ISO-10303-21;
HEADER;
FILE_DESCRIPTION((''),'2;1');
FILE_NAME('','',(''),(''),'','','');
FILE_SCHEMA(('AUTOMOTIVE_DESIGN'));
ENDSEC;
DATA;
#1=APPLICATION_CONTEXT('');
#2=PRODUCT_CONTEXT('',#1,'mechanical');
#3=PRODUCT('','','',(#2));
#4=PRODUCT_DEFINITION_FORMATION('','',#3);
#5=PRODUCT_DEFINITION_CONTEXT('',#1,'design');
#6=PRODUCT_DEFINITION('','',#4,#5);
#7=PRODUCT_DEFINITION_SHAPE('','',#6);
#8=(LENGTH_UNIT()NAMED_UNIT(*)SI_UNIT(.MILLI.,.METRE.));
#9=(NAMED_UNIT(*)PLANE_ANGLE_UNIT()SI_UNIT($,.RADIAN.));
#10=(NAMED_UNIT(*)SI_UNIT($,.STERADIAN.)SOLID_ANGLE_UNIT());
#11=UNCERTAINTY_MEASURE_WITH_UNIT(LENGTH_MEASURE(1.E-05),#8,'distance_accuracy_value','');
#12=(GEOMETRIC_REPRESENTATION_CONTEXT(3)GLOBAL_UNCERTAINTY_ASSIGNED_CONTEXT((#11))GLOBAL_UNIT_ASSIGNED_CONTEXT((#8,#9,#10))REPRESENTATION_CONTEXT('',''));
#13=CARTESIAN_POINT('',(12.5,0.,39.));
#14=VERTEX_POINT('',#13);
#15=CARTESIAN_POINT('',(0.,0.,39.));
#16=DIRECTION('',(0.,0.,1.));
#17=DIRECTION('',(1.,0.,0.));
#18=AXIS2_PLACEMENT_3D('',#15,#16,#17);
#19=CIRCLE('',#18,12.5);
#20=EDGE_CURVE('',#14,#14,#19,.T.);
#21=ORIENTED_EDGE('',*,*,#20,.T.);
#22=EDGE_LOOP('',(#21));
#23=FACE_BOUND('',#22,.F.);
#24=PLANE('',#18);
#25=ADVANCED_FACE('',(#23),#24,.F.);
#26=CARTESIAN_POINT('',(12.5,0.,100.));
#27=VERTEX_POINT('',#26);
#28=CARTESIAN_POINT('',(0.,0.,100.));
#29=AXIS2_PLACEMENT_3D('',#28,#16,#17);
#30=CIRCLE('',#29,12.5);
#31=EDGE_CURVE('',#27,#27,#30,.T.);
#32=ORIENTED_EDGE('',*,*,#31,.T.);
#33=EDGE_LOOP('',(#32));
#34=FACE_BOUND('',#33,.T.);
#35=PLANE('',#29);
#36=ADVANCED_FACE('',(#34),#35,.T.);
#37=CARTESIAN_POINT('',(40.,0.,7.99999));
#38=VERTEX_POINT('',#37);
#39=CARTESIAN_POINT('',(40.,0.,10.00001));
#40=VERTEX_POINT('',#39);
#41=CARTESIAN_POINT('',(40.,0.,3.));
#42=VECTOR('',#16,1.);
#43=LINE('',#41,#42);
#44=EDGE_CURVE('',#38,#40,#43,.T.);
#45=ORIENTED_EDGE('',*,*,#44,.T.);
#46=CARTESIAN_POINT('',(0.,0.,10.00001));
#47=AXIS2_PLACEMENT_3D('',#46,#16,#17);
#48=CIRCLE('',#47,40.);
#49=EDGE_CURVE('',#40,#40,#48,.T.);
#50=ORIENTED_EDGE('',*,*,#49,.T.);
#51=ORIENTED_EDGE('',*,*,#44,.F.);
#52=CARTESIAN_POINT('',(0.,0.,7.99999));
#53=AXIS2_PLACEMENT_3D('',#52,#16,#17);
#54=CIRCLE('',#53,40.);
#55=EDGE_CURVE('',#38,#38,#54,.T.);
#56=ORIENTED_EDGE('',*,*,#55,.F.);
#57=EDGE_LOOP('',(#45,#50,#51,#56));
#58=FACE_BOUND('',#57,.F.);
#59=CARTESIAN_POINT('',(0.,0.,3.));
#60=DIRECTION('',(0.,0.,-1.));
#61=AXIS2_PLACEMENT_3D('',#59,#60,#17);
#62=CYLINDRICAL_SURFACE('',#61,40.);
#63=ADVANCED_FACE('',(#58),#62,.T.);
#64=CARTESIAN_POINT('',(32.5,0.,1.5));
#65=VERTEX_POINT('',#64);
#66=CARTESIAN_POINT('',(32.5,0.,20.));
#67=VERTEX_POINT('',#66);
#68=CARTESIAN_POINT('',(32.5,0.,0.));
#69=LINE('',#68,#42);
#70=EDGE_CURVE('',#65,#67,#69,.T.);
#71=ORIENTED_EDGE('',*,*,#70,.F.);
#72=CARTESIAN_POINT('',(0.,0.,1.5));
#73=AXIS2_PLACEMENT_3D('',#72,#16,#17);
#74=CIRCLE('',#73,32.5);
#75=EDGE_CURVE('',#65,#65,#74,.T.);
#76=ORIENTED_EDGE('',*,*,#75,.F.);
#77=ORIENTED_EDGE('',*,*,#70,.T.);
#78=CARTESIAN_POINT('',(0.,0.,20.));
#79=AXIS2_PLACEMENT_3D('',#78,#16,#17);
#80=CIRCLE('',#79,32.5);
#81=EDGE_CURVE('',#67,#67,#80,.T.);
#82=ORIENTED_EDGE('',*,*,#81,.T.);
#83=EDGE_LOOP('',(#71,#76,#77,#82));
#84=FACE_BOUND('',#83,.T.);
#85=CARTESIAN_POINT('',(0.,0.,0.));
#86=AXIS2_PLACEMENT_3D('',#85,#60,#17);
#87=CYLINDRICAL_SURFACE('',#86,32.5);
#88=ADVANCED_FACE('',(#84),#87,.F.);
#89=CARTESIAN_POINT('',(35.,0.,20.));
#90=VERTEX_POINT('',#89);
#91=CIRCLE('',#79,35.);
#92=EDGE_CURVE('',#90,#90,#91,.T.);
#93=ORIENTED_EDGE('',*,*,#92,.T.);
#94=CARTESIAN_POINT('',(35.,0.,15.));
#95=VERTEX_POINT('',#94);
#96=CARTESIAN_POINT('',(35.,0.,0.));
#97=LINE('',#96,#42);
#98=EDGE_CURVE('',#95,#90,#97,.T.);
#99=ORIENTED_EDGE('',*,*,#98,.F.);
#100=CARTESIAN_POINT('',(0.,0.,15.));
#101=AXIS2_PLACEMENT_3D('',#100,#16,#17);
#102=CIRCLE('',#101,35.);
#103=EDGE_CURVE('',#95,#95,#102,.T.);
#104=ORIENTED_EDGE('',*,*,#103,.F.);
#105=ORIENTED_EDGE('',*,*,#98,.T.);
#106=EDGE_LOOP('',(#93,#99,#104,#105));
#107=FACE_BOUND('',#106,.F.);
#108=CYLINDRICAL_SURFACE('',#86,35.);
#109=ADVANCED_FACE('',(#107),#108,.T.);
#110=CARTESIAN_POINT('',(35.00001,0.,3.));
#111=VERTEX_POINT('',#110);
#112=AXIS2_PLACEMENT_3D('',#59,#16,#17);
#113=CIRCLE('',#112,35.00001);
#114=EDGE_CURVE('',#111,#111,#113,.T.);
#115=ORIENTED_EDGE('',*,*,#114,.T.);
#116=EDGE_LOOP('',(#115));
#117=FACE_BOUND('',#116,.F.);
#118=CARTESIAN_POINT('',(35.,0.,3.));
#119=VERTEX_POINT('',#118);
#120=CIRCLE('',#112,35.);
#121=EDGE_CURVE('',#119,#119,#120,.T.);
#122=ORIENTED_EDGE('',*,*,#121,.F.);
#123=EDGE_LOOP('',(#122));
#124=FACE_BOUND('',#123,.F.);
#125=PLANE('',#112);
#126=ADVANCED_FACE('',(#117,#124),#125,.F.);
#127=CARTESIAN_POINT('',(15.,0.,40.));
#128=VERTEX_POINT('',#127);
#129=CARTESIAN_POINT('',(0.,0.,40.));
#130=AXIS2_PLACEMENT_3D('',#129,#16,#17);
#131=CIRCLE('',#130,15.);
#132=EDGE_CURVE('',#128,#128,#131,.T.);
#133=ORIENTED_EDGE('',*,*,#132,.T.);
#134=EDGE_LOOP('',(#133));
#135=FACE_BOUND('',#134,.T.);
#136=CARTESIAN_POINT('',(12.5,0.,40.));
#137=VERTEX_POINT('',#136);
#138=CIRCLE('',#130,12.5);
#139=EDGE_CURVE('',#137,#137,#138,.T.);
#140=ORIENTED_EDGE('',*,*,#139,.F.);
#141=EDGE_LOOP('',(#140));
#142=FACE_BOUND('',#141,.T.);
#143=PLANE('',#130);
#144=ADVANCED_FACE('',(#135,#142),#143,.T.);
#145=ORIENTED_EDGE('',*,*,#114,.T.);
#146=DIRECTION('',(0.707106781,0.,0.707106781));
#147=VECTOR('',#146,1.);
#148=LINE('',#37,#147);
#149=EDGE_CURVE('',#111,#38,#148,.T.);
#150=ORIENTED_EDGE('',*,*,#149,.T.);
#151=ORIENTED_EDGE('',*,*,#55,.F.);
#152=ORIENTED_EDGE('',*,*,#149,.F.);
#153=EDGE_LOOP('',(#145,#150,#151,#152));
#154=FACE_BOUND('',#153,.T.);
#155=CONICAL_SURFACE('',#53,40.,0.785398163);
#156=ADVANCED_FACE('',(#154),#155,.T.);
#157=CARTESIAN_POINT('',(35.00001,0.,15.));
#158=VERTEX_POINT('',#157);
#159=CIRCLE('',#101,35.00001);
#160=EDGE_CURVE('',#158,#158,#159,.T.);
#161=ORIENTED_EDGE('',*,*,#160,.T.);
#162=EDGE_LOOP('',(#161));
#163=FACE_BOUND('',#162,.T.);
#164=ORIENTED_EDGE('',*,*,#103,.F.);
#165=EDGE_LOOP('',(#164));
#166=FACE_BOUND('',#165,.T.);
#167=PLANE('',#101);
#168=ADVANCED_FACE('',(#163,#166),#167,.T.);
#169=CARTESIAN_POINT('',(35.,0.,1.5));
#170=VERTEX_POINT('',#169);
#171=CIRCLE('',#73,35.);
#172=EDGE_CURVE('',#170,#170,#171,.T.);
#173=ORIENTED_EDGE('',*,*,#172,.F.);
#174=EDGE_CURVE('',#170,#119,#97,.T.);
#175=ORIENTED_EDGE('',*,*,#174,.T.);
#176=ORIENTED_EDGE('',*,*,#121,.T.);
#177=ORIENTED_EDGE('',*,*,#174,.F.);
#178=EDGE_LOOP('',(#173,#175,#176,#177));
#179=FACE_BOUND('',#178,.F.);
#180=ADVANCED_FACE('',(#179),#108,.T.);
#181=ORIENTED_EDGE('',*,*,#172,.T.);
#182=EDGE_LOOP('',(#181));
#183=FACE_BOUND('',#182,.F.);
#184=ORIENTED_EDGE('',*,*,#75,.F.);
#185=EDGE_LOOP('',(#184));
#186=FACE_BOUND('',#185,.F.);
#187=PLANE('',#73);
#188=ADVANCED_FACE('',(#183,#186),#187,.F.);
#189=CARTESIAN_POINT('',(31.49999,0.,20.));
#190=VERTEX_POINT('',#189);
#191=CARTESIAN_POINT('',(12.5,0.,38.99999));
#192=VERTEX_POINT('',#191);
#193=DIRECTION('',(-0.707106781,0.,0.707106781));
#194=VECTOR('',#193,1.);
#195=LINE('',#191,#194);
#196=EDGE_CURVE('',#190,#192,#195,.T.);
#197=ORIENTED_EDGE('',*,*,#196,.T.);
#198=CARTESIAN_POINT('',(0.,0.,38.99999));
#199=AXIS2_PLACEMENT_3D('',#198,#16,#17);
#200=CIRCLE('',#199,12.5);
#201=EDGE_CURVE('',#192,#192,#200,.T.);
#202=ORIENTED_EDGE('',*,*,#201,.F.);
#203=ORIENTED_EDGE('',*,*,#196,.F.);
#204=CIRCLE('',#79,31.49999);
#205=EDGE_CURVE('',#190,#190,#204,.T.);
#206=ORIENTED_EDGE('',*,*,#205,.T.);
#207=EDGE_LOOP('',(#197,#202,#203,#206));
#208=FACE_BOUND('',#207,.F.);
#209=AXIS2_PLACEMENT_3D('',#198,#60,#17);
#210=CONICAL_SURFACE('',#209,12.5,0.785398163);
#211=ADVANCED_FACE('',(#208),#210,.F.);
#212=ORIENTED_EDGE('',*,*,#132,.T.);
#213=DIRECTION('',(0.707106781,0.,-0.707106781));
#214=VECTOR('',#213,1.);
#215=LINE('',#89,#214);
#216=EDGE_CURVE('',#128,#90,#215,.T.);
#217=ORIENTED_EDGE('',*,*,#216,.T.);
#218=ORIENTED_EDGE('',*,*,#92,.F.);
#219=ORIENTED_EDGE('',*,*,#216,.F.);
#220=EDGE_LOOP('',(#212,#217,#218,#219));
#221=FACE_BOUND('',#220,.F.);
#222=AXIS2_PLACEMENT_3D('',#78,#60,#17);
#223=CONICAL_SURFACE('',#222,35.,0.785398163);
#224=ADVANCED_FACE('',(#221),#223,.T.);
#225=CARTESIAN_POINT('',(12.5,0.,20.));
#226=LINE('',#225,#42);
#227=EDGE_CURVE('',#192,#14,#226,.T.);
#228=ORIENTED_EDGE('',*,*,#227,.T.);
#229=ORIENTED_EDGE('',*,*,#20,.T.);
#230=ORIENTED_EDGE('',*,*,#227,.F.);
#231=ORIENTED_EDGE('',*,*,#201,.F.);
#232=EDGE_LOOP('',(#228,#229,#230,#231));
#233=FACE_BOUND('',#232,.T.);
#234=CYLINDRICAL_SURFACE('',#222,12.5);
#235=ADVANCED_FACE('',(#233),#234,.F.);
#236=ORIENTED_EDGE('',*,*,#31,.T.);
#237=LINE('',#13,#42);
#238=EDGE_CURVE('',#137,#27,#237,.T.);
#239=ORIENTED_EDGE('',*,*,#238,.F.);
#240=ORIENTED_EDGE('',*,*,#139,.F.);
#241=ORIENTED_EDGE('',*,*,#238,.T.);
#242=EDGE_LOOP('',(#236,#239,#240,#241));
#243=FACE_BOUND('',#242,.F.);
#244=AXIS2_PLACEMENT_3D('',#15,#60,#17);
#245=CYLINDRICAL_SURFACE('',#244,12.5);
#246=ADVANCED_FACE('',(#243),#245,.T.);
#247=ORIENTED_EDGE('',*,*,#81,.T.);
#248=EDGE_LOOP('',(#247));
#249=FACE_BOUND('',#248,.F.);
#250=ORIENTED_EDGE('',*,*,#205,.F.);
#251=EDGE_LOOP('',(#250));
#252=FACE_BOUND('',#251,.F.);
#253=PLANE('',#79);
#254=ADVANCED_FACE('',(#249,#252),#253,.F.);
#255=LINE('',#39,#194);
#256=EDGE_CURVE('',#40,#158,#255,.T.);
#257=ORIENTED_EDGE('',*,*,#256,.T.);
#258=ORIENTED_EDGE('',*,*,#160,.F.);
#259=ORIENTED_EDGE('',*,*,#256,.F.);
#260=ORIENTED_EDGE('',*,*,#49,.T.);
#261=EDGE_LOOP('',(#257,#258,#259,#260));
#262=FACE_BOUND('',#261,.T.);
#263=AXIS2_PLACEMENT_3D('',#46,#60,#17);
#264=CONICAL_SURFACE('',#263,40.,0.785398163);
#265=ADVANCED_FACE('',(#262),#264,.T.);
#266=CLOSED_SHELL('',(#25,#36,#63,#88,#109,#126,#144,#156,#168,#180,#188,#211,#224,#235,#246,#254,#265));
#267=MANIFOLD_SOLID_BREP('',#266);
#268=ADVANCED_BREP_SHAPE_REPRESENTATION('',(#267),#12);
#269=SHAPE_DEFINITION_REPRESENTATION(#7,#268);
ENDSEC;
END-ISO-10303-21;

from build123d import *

# Parameters (mm, degrees)
F0_R     = 35
F0_R_2   = 32.5
F1_DEPTH = 40
F2_START = 20
F0_R_3   = 12.5
F2_DEPTH = 20
F3_START = 39
F3_DEPTH = 61
F4_SIZE  = 20
F5_SIZE  = 18.99999
F6_START = 3
F0_R_4   = 40
F6_DEPTH = 12
F7_SIZE  = 4.99999
F8_DEPTH = 1.5


# Not quite as in the source:
# - a fillet or chamfer is up to 0.001 mm smaller than in the source, because OpenCascade refuses the exact size


with BuildPart() as f1:
    # F0 (on Top) → F1 (new body)
    with BuildSketch(Plane.XY):
        Circle(F0_R)
        Circle(F0_R_2, mode=Mode.SUBTRACT)
    extrude(amount=F1_DEPTH)

    # F0 (on Top) → F2 (join)
    with BuildSketch(Plane.XY.offset(F2_START)):
        Circle(F0_R_2)
        Circle(F0_R_3, mode=Mode.SUBTRACT)
    extrude(amount=F2_DEPTH)

    # F0 (on Top) → F3 (join)
    with BuildSketch(Plane.XY.offset(F3_START)):
        Circle(F0_R_3)
    extrude(amount=F3_DEPTH)

    # F4
    f4_edges = [f1.edges().sort_by_distance(p)[0] for p in [
        (-35, 0, 40),
    ]]
    chamfer(f4_edges, length=F4_SIZE)

    # F5 (size 19 in the source; OpenCascade refuses exactly that, so slightly less here)
    f5_edges = [f1.edges().sort_by_distance(p)[0] for p in [
        (-12.5, 0, 20),
    ]]
    chamfer(f5_edges, length=F5_SIZE)

    # F0 (on Top) → F6 (join)
    with BuildSketch(Plane.XY.offset(F6_START)):
        Circle(F0_R_4)
        Circle(F0_R, mode=Mode.SUBTRACT)
    extrude(amount=F6_DEPTH)

    # F7 (size 5 in the source; OpenCascade refuses exactly that, so slightly less here)
    f7_edges = [f1.edges().sort_by_distance(p)[0] for p in [
        (-40, 0, 3),
        (-40, 0, 15),
    ]]
    chamfer(f7_edges, length=F7_SIZE)

    # F8 (cut): a face of the model
    f8_faces = [f1.faces().sort_by_distance(p)[0] for p in [
        (-34.0100505063, 0, 0),
    ]]
    extrude(f8_faces, amount=-F8_DEPTH, mode=Mode.SUBTRACT)


solid = f1.part
